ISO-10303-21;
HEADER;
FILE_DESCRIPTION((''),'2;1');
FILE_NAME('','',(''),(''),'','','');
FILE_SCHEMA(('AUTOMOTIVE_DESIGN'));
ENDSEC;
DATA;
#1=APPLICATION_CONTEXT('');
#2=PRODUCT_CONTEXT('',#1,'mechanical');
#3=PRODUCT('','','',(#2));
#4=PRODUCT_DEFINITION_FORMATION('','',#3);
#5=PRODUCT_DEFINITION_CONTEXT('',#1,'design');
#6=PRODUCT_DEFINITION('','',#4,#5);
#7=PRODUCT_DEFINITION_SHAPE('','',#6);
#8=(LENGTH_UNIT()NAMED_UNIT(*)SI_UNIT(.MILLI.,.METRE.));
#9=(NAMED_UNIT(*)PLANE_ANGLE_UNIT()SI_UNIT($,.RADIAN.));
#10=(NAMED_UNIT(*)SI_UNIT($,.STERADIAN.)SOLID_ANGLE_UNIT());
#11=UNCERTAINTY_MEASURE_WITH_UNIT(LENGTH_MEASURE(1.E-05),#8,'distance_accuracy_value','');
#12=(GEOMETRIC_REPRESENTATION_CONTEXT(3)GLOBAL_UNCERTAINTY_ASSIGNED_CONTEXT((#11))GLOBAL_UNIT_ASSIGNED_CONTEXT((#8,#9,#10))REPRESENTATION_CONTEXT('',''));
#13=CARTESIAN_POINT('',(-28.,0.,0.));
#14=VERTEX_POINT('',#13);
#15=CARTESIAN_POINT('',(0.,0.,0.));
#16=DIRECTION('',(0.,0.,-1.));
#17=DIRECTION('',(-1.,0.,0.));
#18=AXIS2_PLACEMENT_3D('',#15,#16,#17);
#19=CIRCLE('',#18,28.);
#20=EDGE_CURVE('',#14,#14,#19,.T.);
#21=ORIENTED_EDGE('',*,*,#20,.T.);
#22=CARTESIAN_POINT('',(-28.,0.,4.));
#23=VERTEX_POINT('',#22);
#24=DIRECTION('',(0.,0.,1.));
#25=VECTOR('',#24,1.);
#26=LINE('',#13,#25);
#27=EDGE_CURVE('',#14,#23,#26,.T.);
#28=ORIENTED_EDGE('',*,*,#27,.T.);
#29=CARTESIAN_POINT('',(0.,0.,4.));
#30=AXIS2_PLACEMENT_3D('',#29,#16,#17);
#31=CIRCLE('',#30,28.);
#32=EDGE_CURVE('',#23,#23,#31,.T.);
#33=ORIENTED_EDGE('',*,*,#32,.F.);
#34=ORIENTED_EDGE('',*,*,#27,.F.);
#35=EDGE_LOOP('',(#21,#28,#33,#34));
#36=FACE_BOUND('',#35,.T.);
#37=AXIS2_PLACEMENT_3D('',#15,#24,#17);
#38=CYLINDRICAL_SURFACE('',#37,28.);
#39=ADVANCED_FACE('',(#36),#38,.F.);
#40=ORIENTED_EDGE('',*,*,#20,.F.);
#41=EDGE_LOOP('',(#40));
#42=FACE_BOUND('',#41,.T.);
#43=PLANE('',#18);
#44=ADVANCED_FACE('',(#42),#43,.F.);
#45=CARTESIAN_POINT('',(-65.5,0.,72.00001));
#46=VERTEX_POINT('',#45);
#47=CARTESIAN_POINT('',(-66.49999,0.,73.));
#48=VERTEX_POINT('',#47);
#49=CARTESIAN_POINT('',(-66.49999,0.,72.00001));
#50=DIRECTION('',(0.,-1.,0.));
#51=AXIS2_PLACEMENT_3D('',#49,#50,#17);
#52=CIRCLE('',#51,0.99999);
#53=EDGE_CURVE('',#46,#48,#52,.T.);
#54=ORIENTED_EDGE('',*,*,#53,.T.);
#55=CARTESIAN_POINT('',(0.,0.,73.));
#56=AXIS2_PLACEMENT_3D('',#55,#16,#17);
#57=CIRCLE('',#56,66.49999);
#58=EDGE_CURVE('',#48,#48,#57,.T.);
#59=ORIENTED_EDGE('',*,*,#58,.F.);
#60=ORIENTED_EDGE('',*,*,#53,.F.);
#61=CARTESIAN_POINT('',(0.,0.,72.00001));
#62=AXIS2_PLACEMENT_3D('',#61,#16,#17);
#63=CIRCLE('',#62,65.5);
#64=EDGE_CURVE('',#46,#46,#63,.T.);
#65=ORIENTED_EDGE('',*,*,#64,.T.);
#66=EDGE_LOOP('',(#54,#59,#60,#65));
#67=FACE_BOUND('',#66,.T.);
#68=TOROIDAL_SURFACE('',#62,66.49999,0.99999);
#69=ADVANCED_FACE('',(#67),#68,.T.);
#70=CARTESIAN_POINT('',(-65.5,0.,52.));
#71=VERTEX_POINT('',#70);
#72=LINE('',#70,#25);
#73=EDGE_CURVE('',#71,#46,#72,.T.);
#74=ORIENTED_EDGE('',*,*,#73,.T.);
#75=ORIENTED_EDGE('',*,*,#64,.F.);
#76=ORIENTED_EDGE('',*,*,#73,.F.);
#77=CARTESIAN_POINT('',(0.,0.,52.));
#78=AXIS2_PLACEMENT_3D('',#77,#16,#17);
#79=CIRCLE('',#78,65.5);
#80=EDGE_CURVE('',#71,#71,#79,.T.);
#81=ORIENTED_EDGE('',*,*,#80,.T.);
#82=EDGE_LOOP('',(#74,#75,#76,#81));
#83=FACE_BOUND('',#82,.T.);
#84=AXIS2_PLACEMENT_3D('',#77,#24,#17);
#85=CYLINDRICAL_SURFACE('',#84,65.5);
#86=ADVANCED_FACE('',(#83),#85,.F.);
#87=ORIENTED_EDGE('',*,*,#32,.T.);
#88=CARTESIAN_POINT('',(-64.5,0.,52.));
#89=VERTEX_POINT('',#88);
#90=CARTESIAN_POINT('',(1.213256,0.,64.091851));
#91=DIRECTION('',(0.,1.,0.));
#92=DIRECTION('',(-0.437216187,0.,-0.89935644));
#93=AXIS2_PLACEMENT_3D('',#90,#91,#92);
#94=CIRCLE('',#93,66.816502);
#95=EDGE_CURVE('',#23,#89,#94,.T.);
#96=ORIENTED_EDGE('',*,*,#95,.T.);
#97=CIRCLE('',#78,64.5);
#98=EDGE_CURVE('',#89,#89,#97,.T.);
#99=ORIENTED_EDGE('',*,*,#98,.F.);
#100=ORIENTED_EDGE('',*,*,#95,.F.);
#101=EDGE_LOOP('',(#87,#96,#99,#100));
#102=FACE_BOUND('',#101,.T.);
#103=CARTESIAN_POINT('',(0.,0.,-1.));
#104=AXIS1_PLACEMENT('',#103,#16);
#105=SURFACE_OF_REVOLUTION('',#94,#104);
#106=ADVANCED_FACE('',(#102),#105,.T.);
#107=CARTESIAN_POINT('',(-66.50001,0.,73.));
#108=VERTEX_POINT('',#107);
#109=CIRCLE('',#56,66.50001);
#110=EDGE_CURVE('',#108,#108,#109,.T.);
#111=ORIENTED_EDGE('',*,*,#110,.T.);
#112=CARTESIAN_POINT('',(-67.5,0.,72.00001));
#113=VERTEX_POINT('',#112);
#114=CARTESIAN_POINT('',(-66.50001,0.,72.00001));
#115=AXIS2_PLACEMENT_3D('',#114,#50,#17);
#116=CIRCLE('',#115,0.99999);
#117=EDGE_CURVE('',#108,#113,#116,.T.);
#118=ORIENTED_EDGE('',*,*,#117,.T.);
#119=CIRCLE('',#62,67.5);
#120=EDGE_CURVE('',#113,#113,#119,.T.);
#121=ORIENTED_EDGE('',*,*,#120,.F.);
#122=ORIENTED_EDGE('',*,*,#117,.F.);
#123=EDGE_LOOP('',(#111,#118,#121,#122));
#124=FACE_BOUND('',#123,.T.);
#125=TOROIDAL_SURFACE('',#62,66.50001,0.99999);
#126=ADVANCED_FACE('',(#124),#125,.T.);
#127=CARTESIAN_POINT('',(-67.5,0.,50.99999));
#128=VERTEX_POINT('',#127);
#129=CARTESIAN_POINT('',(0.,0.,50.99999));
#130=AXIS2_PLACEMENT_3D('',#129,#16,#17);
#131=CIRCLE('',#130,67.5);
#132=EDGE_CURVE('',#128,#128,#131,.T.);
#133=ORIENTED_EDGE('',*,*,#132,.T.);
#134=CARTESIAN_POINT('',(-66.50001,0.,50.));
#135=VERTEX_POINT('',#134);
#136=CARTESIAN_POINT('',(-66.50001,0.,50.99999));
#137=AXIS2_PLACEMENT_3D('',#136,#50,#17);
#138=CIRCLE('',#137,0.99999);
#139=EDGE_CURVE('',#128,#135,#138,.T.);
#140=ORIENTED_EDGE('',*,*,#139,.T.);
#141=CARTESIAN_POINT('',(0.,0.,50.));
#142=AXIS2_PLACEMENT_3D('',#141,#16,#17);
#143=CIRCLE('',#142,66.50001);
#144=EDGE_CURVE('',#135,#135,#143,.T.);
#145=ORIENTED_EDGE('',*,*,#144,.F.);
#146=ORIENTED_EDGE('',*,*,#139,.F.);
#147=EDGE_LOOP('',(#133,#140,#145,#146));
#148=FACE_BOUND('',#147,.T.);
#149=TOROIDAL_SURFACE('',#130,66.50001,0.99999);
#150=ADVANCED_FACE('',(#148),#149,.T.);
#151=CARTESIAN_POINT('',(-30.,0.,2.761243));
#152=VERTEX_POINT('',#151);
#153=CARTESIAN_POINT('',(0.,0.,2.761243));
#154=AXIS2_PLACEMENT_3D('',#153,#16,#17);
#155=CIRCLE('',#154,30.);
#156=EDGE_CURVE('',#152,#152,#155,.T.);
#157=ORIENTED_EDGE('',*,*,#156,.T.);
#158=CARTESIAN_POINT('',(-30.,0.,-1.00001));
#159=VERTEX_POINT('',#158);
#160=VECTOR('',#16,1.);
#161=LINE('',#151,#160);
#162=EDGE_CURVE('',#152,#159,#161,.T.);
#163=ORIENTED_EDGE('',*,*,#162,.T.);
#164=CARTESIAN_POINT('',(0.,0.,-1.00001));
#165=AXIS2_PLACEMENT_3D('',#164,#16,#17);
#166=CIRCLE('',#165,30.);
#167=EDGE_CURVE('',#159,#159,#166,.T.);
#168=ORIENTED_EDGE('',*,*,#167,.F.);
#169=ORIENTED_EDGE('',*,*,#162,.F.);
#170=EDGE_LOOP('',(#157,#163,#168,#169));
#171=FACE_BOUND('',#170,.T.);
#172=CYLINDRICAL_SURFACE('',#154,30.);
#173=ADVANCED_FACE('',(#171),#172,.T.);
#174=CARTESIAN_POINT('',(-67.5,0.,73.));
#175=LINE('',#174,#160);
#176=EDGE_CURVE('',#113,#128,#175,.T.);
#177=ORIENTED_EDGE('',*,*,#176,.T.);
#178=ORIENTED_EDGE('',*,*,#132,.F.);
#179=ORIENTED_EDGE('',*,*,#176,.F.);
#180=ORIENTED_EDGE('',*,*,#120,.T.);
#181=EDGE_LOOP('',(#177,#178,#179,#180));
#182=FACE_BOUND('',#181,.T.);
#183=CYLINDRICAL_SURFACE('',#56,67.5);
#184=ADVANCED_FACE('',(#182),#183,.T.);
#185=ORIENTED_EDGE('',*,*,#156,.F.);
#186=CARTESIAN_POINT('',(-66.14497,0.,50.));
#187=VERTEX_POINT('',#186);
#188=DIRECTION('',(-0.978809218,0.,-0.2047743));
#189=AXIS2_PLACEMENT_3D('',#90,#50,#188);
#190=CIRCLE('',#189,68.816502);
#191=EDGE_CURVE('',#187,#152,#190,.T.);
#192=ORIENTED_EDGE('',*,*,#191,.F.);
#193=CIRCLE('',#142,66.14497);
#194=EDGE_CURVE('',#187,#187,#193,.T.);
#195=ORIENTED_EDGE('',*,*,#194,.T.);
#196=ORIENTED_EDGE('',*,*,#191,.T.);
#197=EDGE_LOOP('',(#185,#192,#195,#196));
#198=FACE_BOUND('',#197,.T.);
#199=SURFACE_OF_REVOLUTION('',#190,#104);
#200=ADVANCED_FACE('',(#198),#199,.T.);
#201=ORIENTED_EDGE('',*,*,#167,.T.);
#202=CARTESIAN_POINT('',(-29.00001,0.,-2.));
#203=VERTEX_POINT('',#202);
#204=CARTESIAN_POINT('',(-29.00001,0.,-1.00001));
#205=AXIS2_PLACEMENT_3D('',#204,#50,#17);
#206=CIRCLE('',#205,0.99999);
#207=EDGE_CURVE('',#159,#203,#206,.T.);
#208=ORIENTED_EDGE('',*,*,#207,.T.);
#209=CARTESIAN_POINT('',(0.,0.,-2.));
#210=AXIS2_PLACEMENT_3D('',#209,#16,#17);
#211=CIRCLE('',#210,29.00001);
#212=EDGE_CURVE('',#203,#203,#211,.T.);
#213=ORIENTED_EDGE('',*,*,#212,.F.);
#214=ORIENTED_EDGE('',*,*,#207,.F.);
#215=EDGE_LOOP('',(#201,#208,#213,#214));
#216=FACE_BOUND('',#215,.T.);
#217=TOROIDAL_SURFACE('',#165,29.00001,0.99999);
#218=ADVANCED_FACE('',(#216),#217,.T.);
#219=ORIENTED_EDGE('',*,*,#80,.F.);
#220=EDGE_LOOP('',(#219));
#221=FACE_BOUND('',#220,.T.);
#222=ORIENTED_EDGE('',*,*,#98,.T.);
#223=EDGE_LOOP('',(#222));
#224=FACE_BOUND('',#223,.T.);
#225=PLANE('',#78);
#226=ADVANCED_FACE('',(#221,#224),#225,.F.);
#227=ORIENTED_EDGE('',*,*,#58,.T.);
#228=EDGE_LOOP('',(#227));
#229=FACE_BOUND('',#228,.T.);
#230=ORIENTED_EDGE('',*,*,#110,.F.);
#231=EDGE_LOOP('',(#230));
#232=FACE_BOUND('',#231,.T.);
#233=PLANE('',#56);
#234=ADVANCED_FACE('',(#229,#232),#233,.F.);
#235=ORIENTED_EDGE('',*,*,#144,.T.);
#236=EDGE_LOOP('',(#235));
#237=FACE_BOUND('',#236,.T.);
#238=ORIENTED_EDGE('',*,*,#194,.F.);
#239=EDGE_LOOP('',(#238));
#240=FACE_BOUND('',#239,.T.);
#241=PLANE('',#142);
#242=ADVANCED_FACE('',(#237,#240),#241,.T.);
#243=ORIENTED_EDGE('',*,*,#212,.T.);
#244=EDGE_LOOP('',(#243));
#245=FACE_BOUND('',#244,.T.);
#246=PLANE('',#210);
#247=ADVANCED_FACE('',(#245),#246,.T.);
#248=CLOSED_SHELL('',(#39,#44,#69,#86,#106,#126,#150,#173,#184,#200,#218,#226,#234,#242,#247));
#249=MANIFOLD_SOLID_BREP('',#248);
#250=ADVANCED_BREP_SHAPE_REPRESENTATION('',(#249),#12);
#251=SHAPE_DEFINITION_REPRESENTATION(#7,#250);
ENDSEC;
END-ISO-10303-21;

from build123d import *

# Parameters (mm, degrees)
F2_R = 0.99999


# Not quite as in the source:
# - a fillet or chamfer is up to 0.001 mm smaller than in the source, because OpenCascade refuses the exact size


with BuildPart() as f1:
    # F0 (on Front) → F1 (revolve)
    with BuildSketch(Plane.XZ):
        with BuildLine():
            Line((-64.5, 52), (-65.5, 52))
            Line((-65.5, 52), (-65.5, 73))
            Line((-65.5, 73), (-67.5, 73))
            Line((-67.5, 73), (-67.5, 50))
            Line((-67.5, 50), (-66.1449700482, 50))
            ThreePointArc((-66.1449700482, 50), (-53.4398255255, 22.2737739938), (-30, 2.761242502))
            Line((-30, 2.761242502), (-30, -2))
            Line((-30, -2), (0, -2))
            Line((0, -2), (0, 0))
            Line((0, 0), (-28, 0))
            Line((-28, 0), (-28, 4))
            ThreePointArc((-28, 4), (-51.9728387009, 23.6482580712), (-64.5, 52))
        make_face()
    revolve(axis=Axis((0, 0, -1), (0, 0, -1)))

    # F2 (radius 1 in the source; OpenCascade refuses exactly that, so slightly less here)
    f2_edges = [f1.edges().sort_by_distance(p)[0] for p in [
        (67.5, 0, 73),
        (65.5, 0, 73),
        (67.5, 0, 50),
        (30, 0, -2),
    ]]
    fillet(f2_edges, radius=F2_R)


solid = f1.part
